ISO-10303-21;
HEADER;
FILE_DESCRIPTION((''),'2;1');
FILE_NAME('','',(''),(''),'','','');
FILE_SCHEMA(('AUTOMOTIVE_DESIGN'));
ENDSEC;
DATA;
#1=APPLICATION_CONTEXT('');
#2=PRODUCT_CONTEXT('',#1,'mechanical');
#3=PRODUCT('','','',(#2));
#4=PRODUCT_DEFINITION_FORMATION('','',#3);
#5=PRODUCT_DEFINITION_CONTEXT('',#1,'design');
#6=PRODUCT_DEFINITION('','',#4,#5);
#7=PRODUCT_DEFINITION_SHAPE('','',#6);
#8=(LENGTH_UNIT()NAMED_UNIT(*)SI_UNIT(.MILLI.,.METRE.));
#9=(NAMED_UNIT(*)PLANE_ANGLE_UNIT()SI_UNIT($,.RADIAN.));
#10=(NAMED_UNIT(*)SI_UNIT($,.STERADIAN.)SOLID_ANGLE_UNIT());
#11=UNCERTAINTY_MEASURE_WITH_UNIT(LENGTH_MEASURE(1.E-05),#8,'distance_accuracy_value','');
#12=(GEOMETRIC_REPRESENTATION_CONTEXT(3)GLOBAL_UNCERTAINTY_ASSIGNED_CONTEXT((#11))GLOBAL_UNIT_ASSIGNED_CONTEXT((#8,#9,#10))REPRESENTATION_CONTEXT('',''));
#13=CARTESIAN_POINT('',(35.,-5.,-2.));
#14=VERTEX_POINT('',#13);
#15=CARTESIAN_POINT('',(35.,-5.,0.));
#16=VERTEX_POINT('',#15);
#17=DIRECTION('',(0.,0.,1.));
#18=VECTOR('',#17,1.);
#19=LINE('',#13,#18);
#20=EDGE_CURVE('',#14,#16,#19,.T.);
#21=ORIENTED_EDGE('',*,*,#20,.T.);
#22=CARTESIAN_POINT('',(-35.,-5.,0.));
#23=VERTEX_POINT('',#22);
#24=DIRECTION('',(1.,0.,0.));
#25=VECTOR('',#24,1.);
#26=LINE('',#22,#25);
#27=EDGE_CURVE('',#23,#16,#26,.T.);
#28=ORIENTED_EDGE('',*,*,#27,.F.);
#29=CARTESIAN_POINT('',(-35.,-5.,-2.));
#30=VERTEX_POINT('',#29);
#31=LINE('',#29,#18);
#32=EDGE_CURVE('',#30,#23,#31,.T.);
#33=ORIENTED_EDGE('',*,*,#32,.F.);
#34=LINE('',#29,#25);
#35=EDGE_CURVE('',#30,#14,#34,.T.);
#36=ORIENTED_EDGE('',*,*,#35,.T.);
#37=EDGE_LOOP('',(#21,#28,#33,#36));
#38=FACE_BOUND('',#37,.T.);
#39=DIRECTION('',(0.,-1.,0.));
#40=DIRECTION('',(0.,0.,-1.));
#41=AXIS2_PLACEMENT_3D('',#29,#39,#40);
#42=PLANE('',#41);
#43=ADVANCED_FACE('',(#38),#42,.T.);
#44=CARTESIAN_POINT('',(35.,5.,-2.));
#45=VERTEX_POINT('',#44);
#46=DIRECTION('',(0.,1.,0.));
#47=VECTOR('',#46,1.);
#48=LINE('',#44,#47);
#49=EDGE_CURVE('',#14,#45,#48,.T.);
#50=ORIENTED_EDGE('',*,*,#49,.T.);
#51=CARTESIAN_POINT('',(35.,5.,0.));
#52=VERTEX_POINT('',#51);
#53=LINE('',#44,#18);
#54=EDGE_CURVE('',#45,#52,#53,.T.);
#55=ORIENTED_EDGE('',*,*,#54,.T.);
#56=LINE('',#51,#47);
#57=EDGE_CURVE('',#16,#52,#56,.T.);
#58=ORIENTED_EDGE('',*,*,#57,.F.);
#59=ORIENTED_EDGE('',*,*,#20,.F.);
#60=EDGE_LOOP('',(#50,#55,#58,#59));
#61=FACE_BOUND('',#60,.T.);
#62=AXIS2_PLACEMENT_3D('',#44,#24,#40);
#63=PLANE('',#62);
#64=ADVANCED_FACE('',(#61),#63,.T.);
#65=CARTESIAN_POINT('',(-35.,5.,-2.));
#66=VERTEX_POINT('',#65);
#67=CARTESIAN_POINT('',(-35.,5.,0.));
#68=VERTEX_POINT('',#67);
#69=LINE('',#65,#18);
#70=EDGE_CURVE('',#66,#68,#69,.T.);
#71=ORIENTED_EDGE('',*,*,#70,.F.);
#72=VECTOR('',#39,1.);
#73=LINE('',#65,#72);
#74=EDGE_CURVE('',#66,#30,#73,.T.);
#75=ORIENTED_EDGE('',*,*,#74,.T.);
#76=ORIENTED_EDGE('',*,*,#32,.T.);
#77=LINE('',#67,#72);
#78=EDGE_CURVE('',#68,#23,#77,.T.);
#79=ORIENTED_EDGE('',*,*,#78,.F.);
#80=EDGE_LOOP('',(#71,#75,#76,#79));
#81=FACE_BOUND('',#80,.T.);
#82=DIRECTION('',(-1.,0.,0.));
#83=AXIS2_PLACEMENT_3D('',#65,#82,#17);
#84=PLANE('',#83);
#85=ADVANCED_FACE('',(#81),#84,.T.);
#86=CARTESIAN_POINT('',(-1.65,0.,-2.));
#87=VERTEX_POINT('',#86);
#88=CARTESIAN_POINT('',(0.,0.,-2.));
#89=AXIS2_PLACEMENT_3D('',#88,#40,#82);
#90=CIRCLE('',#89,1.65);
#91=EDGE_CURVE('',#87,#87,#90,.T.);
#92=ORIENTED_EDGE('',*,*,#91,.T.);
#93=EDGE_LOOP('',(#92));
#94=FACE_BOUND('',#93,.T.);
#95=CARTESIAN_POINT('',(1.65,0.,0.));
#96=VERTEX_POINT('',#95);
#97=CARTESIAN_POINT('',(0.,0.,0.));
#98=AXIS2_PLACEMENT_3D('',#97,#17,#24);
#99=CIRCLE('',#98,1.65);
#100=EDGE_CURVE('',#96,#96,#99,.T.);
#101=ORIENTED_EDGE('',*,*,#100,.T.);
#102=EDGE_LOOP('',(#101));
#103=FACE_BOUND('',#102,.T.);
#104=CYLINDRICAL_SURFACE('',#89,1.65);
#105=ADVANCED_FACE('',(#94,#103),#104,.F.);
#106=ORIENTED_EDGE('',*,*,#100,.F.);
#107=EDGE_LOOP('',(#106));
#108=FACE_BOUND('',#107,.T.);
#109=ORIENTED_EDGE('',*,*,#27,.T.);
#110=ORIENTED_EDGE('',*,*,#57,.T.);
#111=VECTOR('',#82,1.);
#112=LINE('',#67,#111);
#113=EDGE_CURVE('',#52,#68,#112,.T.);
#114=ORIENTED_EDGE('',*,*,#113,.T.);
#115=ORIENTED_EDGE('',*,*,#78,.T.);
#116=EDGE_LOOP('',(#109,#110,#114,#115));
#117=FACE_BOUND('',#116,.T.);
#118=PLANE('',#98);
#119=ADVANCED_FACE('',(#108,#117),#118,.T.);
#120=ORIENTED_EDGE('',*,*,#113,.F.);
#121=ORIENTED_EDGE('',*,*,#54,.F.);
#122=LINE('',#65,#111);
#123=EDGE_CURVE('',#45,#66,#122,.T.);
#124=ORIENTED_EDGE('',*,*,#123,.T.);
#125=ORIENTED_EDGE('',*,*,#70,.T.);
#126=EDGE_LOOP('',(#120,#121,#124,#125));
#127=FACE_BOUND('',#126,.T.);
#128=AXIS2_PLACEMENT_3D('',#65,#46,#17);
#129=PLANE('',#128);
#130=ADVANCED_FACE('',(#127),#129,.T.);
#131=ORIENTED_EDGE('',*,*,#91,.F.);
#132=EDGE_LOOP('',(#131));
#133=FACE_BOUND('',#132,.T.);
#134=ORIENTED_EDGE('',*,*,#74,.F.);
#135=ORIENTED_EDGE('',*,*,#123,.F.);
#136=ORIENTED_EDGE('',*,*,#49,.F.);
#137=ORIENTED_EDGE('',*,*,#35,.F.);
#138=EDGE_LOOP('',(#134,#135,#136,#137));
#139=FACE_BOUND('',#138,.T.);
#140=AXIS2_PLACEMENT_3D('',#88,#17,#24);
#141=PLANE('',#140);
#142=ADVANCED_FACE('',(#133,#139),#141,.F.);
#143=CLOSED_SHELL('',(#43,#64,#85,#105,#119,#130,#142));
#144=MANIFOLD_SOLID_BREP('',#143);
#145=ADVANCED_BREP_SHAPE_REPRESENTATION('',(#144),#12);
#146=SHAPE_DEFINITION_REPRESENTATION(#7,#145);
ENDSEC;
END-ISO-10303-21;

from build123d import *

# Parameters (mm, degrees)
ESBO_O1_W                                      = 70
ESBO_O1_H                                      = 10
FLANGE_BASE1_DEPTH                             = 2
BROCA_DE_ROSQUEAR_DE_CANO_PARA_TARRAXA_D_D     = 3.3
BROCA_DE_ROSQUEAR_DE_CANO_PARA_TARRAXA_D_DEPTH = 4
BROCA_DE_ROSQUEAR_DE_CANO_PARA_TARRAXA_D_TIP   = 0.991420021


# Sheet-metal steps are written as plain solids
with BuildPart() as part:
    # Esboço1 → Flange-base1 (new body)
    with BuildSketch(Plane.XY):
        Rectangle(ESBO_O1_W, ESBO_O1_H)
    extrude(amount=-FLANGE_BASE1_DEPTH)

    # Broca de rosquear de cano para tarraxa de 1/81
    with Locations(Plane(origin=(0, 0, -2), x_dir=(-1, 0, 0), z_dir=(0, 0, -1))):
        with Locations((0, 0)):
            Hole(BROCA_DE_ROSQUEAR_DE_CANO_PARA_TARRAXA_D_D / 2, depth=BROCA_DE_ROSQUEAR_DE_CANO_PARA_TARRAXA_D_DEPTH)
            with Locations((0, 0, -(BROCA_DE_ROSQUEAR_DE_CANO_PARA_TARRAXA_D_DEPTH + BROCA_DE_ROSQUEAR_DE_CANO_PARA_TARRAXA_D_TIP / 2))):  # 118° drill point
                Cone(0, BROCA_DE_ROSQUEAR_DE_CANO_PARA_TARRAXA_D_D / 2, BROCA_DE_ROSQUEAR_DE_CANO_PARA_TARRAXA_D_TIP, mode=Mode.SUBTRACT)


solid = part.part
